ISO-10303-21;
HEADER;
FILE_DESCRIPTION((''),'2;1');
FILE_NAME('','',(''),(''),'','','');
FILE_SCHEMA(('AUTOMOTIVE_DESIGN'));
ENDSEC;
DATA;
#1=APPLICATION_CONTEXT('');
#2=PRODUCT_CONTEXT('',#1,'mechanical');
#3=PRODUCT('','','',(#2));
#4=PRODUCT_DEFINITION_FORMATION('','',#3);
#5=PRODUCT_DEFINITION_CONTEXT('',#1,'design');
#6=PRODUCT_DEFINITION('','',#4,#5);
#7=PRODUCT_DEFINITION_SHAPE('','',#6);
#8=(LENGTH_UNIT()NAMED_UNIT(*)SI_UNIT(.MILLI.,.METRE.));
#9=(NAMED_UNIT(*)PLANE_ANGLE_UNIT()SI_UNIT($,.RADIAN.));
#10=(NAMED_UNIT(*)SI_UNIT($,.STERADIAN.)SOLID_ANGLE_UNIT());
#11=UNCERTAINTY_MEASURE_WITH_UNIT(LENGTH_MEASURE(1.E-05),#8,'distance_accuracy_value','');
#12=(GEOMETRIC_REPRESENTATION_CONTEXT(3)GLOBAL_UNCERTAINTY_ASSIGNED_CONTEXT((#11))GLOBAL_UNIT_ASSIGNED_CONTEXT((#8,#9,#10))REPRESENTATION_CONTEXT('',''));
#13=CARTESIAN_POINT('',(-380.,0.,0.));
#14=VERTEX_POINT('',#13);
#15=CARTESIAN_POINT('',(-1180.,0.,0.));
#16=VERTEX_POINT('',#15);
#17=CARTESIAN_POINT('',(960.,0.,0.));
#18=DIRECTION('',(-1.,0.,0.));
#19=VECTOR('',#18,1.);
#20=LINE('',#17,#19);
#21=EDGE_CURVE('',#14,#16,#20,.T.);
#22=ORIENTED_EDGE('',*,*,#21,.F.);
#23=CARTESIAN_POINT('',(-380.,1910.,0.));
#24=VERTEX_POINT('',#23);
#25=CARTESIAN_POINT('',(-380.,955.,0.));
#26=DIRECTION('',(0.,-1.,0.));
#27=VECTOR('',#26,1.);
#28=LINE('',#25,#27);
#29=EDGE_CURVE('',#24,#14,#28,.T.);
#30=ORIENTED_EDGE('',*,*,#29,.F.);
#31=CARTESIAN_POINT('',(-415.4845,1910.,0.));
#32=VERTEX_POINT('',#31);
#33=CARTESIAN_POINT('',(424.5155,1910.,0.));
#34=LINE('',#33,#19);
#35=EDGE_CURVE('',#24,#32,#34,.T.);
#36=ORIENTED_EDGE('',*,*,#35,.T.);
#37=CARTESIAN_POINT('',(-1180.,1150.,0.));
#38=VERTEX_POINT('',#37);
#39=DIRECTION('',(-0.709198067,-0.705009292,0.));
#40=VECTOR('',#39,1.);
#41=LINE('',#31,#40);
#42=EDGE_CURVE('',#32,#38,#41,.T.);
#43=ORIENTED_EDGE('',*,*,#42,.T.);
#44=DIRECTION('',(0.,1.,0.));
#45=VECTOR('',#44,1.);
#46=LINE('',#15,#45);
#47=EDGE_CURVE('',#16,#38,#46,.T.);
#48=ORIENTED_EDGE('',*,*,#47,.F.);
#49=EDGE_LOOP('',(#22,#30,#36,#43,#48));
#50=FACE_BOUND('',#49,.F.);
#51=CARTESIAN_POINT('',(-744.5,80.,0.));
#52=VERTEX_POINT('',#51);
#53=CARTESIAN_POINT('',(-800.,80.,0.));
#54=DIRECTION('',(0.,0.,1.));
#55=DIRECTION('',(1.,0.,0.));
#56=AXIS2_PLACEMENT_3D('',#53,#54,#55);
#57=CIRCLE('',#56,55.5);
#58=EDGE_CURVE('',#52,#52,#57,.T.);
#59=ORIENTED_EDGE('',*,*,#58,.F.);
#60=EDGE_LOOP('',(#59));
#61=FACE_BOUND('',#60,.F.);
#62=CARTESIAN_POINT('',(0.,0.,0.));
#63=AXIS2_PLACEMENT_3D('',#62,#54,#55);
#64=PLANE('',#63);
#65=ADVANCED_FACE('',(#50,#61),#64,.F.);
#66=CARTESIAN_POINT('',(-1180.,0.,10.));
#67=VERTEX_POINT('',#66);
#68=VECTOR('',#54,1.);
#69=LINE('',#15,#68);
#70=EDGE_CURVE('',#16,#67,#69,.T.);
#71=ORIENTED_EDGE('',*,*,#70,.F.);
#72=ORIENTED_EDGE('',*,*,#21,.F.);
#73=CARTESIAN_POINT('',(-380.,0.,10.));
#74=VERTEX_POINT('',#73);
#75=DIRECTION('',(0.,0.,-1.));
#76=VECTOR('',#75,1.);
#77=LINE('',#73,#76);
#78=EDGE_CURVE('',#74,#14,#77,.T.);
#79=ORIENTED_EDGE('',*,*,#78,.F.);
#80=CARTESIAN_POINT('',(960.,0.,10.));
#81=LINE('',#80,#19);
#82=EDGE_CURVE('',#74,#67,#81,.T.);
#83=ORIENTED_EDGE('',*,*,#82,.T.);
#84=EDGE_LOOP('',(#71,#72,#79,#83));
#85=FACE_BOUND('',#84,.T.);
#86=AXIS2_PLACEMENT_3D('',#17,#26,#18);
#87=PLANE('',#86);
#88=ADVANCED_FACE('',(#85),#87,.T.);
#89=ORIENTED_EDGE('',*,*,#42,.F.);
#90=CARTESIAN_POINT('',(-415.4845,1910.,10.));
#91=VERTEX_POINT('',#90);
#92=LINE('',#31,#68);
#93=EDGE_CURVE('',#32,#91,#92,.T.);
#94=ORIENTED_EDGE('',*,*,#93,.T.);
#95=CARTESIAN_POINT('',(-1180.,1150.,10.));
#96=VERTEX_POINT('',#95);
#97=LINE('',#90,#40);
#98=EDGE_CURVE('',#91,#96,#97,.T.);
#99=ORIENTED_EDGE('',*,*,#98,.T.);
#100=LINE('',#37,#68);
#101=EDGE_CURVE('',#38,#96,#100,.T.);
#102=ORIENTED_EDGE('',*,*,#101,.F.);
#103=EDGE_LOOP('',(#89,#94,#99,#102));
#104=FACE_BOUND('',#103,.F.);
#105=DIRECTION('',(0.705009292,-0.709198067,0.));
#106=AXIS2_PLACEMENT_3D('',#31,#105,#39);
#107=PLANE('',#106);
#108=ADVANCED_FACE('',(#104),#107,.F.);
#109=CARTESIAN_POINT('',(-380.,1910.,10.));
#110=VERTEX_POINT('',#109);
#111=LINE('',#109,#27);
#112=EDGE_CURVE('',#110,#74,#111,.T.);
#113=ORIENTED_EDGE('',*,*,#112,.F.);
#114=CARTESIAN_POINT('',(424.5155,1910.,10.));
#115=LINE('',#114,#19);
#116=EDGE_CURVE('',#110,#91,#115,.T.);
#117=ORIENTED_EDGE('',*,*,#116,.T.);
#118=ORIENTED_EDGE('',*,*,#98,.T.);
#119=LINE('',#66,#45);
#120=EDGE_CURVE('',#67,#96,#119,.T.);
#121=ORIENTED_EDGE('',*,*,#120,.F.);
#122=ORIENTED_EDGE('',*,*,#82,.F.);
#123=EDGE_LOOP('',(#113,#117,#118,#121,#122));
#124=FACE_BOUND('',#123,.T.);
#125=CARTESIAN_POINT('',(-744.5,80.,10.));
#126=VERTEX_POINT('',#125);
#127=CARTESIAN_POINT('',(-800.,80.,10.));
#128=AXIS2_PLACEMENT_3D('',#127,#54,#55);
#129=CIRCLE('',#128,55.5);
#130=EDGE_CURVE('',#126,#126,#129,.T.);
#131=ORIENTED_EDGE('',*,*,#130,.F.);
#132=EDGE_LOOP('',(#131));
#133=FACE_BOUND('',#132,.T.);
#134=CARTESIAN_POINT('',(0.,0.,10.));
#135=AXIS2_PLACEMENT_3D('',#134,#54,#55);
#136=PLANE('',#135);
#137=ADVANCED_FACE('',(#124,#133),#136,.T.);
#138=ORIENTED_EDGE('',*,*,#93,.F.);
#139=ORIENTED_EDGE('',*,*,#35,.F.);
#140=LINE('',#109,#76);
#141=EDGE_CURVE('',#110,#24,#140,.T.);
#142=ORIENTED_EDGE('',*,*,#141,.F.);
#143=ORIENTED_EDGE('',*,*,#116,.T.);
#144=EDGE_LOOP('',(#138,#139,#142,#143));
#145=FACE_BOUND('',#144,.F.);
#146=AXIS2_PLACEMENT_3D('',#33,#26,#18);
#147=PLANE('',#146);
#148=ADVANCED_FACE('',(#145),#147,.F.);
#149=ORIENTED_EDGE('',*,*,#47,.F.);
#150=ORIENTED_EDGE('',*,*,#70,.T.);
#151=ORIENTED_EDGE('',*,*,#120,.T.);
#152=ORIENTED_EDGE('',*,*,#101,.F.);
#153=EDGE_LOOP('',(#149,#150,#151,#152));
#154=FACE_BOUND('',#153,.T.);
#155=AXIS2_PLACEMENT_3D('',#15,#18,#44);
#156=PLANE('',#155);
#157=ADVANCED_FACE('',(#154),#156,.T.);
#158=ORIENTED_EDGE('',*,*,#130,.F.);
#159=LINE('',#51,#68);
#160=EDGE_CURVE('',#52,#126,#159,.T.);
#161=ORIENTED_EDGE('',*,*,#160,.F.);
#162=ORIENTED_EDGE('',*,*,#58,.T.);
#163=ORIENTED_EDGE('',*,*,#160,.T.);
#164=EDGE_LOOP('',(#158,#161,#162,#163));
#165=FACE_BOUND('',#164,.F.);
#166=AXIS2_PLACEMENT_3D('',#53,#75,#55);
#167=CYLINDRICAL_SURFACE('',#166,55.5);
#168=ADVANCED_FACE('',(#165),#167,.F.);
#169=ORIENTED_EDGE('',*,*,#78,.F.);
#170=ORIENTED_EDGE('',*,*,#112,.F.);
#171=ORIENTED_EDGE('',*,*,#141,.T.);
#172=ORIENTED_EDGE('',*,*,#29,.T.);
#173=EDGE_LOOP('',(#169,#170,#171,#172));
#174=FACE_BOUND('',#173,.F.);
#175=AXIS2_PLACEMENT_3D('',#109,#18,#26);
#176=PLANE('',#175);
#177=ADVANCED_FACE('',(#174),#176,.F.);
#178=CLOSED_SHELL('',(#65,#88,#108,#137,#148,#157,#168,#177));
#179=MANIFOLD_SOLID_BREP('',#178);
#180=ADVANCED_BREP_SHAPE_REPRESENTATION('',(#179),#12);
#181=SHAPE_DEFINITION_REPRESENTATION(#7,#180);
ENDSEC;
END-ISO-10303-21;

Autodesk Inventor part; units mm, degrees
ref_plane "YZ Plane" through (0, 0, 0) normal (1, 0, 0) x (0, 1, 0)
ref_plane "XZ Plane" through (0, 0, 0) normal (0, 1, 0) x (-1, 0, 0)
ref_plane "XY Plane" through (0, 0, 0) normal (0, 0, 1) x (1, 0, 0)
sketch "Sketch1" plane through (0, 0, 0) normal (0, 0, 1) x (1, 0, 0)
  line L0 (0, 0) -> (0, 1910) construction
  line L1 (424.5155, 1910) -> (-415.4845, 1910)
  line L2 (-415.4845, 1910) -> (-1180, 1150)
  line L3 (-1180, 0) -> (-1180, 1150)
  line L4 (960, 0) -> (960, 1342.8524)
  line L5 (424.5155, 1910) -> (960, 1342.8524)
  circle A0 centre (0, 950) radius 265 construction
  line L6 (960, 0) -> (-1180, 0)
  circle A1 centre (-1701.6377, -269.2167) radius 188.5 construction
  circle A2 centre (-800, 80) radius 55.5
  circle A3 centre (0, 950) radius 170
  line L7 (0, 1215) -> (0, 1120) construction
  line L8 (-721.2646, 955) -> (721.2646, 955) construction
  line L9 (-169.9265, 955) -> (-174.9265, 955) construction
  line L10 (-174.9265, 960) -> (-174.9265, 950)
  line L11 (-174.9265, 960) -> (-169.7056, 960)
  line L12 (-174.9265, 950) -> (-170, 950)
  line L13 (169.9265, 955) -> (174.9265, 955) construction
  line L14 (174.9265, 960) -> (174.9265, 950)
  line L15 (169.7056, 960) -> (174.9265, 960)
  line L16 (174.9265, 950) -> (170, 950)
  line L17 (-174.9265, 970) -> (174.9265, 970)
  line L18 (174.9265, 970) -> (174.9265, 940)
  line L19 (174.9265, 940) -> (-174.9265, 940)
  line L20 (-174.9265, 940) -> (-174.9265, 970)
  arc A4 (-2.4999, 780.0184) -> (2.4999, 780.0184) centre (0, 780) ccw
  arc A5 (2.4999, 1119.9816) -> (-2.4999, 1119.9816) centre (0, 1120) ccw
  point P0 (0, 955)
  point P1 (-169.7056, 940)
  point P2 (169.7056, 940)
  point P3 (168.8194, 970)
  point P4 (-168.8194, 970)
  dimension "d52" = 530
  dimension "d72" = 340
  dimension "d1" = 840
  dimension "d3" = 1150
  dimension "d12" = 1180
  dimension "d13" = 950
  dimension "d14" = 111
  dimension "d15" = 1910
  dimension "d17" = -521.6377
  dimension "d18" = 377
  dimension "d19" = -269.2167
  dimension "d34" = 380
  dimension "d35" = 80
  dimension "d37" = 2140
  dimension "d53" = 5
  dimension "d54" = 10
  dimension "d55" = 30
  dimension "d67" = 5
  dimension "d68" = 5
  dimension "d69" = 780
  dimension "d71" = 1078
extrude "Extrusion1" add sketch "Sketch1" along normal blind 10 contours L5 L4 L6 L3 L2 L1 | A3 L19 L17 | L16 L18 L19 A3 | A3 L15 L14 L16 | A3 L17 L18 L15 | L19 L20 L12 A3 | A3 L11 L20 L17 | L12 L10 L11 A3
fillet "Fillet1" radius 10 4 edges at (-168.8194, 970, 5) (-169.7056, 940, 5) (168.8194, 970, 5) (169.7056, 940, 5)
sketch "Sketch4" plane through (0, 0, 0) normal (0, 0, 1) x (1, 0, 0)
  circle A0 centre (-51.6989, 1209.9081) radius 6.5
  arc A1 (-2.4999, 1119.9816) -> (-166.985, 981.875) centre (0, 950) ccw projected
  line L0 (0, 950) -> (0, 1196.7062) construction
  line L1 (-51.6989, 1209.9081) -> (0, 950) construction
  point P0 (0, 0)
  point P1 (-5, 1149.9375)
  dimension "d59" = 265
  dimension "d60" = 13
  dimension "d61" = 11.25
extrude "Extrusion4" cut sketch "Sketch4" along normal blind 10
pattern_circular "Circular Pattern3" count 16 over 360 about axis through (0, 950, 0) along (0, 0, 1) of "Extrusion4"
sketch "Sketch5" plane through (0, 0, 10) normal (0, 0, 1) x (1, 0, 0)
  circle A0 centre (51.6989, 1209.9081) radius 6.5 projected
  circle A1 centre (147.2261, 1170.3394) radius 6.5 projected
  circle A2 centre (220.3394, 1097.2261) radius 6.5 projected
  circle A3 centre (259.9081, 1001.6989) radius 6.5 projected
  circle A4 centre (259.9081, 898.3011) radius 6.5 projected
  circle A5 centre (220.3394, 802.7739) radius 6.5 projected
  circle A6 centre (147.2261, 729.6606) radius 6.5 projected
  circle A7 centre (51.6989, 690.0919) radius 6.5 projected
  circle A8 centre (-51.6989, 690.0919) radius 6.5 projected
  circle A9 centre (-147.2261, 729.6606) radius 6.5 projected
  circle A10 centre (-220.3394, 802.7739) radius 6.5 projected
  circle A11 centre (-259.9081, 898.3011) radius 6.5 projected
  circle A12 centre (-259.9081, 1001.6989) radius 6.5 projected
  circle A13 centre (-220.3394, 1097.2261) radius 6.5 projected
  circle A14 centre (-147.2261, 1170.3394) radius 6.5 projected
  circle A15 centre (-51.6989, 1209.9081) radius 6.5 projected
  line L0 (960, 1342.8524) -> (424.5155, 1910) projected
  line L1 (424.5155, 1910) -> (-415.4845, 1910) projected
  line L2 (-415.4845, 1910) -> (-1180, 1150) projected
  line L3 (-1180, 1150) -> (-1180, 0) projected
  line L4 (-1180, 0) -> (960, 0) projected
  line L5 (960, 0) -> (960, 1342.8524) projected
  arc A16 (2.4999, 780.0184) -> (168.6666, 928.75) centre (0, 950) ccw projected
  arc A17 (-2.4999, 780.0184) -> (2.4999, 780.0184) centre (0, 780) ccw projected
  arc A18 (-168.6666, 928.75) -> (-2.4999, 780.0184) centre (0, 950) ccw projected
  arc A19 (-158.7451, 940) -> (-168.6666, 928.75) centre (-158.7451, 930) ccw projected
  line L6 (-158.7451, 940) -> (158.7451, 940) projected
  arc A20 (168.6666, 928.75) -> (158.7451, 940) centre (158.7451, 930) ccw projected
  circle A21 centre (-800, 80) radius 55.5 projected
  line L7 (157.1623, 970) -> (-157.1623, 970) projected
  arc A22 (-166.985, 981.875) -> (-157.1623, 970) centre (-157.1623, 980) ccw projected
  arc A23 (-2.4999, 1119.9816) -> (-166.985, 981.875) centre (0, 950) ccw projected
  arc A24 (2.4999, 1119.9816) -> (-2.4999, 1119.9816) centre (0, 1120) ccw projected
  arc A25 (166.985, 981.875) -> (2.4999, 1119.9816) centre (0, 950) ccw projected
  arc A26 (157.1623, 970) -> (166.985, 981.875) centre (157.1623, 980) ccw projected
  line L8 (424.5155, 1910) -> (-415.4845, 1910) projected
  line L9 (-380, 1910) -> (-380, 0)
  point P0 (0, 0)
  dimension "d73" = 1340
extrude "Extrusion5" cut sketch "Sketch5" against normal through all contours L5 L4 L9 L1 L0
properties part number "ДМФ 011 Стенка Корма ЛЕВ"
